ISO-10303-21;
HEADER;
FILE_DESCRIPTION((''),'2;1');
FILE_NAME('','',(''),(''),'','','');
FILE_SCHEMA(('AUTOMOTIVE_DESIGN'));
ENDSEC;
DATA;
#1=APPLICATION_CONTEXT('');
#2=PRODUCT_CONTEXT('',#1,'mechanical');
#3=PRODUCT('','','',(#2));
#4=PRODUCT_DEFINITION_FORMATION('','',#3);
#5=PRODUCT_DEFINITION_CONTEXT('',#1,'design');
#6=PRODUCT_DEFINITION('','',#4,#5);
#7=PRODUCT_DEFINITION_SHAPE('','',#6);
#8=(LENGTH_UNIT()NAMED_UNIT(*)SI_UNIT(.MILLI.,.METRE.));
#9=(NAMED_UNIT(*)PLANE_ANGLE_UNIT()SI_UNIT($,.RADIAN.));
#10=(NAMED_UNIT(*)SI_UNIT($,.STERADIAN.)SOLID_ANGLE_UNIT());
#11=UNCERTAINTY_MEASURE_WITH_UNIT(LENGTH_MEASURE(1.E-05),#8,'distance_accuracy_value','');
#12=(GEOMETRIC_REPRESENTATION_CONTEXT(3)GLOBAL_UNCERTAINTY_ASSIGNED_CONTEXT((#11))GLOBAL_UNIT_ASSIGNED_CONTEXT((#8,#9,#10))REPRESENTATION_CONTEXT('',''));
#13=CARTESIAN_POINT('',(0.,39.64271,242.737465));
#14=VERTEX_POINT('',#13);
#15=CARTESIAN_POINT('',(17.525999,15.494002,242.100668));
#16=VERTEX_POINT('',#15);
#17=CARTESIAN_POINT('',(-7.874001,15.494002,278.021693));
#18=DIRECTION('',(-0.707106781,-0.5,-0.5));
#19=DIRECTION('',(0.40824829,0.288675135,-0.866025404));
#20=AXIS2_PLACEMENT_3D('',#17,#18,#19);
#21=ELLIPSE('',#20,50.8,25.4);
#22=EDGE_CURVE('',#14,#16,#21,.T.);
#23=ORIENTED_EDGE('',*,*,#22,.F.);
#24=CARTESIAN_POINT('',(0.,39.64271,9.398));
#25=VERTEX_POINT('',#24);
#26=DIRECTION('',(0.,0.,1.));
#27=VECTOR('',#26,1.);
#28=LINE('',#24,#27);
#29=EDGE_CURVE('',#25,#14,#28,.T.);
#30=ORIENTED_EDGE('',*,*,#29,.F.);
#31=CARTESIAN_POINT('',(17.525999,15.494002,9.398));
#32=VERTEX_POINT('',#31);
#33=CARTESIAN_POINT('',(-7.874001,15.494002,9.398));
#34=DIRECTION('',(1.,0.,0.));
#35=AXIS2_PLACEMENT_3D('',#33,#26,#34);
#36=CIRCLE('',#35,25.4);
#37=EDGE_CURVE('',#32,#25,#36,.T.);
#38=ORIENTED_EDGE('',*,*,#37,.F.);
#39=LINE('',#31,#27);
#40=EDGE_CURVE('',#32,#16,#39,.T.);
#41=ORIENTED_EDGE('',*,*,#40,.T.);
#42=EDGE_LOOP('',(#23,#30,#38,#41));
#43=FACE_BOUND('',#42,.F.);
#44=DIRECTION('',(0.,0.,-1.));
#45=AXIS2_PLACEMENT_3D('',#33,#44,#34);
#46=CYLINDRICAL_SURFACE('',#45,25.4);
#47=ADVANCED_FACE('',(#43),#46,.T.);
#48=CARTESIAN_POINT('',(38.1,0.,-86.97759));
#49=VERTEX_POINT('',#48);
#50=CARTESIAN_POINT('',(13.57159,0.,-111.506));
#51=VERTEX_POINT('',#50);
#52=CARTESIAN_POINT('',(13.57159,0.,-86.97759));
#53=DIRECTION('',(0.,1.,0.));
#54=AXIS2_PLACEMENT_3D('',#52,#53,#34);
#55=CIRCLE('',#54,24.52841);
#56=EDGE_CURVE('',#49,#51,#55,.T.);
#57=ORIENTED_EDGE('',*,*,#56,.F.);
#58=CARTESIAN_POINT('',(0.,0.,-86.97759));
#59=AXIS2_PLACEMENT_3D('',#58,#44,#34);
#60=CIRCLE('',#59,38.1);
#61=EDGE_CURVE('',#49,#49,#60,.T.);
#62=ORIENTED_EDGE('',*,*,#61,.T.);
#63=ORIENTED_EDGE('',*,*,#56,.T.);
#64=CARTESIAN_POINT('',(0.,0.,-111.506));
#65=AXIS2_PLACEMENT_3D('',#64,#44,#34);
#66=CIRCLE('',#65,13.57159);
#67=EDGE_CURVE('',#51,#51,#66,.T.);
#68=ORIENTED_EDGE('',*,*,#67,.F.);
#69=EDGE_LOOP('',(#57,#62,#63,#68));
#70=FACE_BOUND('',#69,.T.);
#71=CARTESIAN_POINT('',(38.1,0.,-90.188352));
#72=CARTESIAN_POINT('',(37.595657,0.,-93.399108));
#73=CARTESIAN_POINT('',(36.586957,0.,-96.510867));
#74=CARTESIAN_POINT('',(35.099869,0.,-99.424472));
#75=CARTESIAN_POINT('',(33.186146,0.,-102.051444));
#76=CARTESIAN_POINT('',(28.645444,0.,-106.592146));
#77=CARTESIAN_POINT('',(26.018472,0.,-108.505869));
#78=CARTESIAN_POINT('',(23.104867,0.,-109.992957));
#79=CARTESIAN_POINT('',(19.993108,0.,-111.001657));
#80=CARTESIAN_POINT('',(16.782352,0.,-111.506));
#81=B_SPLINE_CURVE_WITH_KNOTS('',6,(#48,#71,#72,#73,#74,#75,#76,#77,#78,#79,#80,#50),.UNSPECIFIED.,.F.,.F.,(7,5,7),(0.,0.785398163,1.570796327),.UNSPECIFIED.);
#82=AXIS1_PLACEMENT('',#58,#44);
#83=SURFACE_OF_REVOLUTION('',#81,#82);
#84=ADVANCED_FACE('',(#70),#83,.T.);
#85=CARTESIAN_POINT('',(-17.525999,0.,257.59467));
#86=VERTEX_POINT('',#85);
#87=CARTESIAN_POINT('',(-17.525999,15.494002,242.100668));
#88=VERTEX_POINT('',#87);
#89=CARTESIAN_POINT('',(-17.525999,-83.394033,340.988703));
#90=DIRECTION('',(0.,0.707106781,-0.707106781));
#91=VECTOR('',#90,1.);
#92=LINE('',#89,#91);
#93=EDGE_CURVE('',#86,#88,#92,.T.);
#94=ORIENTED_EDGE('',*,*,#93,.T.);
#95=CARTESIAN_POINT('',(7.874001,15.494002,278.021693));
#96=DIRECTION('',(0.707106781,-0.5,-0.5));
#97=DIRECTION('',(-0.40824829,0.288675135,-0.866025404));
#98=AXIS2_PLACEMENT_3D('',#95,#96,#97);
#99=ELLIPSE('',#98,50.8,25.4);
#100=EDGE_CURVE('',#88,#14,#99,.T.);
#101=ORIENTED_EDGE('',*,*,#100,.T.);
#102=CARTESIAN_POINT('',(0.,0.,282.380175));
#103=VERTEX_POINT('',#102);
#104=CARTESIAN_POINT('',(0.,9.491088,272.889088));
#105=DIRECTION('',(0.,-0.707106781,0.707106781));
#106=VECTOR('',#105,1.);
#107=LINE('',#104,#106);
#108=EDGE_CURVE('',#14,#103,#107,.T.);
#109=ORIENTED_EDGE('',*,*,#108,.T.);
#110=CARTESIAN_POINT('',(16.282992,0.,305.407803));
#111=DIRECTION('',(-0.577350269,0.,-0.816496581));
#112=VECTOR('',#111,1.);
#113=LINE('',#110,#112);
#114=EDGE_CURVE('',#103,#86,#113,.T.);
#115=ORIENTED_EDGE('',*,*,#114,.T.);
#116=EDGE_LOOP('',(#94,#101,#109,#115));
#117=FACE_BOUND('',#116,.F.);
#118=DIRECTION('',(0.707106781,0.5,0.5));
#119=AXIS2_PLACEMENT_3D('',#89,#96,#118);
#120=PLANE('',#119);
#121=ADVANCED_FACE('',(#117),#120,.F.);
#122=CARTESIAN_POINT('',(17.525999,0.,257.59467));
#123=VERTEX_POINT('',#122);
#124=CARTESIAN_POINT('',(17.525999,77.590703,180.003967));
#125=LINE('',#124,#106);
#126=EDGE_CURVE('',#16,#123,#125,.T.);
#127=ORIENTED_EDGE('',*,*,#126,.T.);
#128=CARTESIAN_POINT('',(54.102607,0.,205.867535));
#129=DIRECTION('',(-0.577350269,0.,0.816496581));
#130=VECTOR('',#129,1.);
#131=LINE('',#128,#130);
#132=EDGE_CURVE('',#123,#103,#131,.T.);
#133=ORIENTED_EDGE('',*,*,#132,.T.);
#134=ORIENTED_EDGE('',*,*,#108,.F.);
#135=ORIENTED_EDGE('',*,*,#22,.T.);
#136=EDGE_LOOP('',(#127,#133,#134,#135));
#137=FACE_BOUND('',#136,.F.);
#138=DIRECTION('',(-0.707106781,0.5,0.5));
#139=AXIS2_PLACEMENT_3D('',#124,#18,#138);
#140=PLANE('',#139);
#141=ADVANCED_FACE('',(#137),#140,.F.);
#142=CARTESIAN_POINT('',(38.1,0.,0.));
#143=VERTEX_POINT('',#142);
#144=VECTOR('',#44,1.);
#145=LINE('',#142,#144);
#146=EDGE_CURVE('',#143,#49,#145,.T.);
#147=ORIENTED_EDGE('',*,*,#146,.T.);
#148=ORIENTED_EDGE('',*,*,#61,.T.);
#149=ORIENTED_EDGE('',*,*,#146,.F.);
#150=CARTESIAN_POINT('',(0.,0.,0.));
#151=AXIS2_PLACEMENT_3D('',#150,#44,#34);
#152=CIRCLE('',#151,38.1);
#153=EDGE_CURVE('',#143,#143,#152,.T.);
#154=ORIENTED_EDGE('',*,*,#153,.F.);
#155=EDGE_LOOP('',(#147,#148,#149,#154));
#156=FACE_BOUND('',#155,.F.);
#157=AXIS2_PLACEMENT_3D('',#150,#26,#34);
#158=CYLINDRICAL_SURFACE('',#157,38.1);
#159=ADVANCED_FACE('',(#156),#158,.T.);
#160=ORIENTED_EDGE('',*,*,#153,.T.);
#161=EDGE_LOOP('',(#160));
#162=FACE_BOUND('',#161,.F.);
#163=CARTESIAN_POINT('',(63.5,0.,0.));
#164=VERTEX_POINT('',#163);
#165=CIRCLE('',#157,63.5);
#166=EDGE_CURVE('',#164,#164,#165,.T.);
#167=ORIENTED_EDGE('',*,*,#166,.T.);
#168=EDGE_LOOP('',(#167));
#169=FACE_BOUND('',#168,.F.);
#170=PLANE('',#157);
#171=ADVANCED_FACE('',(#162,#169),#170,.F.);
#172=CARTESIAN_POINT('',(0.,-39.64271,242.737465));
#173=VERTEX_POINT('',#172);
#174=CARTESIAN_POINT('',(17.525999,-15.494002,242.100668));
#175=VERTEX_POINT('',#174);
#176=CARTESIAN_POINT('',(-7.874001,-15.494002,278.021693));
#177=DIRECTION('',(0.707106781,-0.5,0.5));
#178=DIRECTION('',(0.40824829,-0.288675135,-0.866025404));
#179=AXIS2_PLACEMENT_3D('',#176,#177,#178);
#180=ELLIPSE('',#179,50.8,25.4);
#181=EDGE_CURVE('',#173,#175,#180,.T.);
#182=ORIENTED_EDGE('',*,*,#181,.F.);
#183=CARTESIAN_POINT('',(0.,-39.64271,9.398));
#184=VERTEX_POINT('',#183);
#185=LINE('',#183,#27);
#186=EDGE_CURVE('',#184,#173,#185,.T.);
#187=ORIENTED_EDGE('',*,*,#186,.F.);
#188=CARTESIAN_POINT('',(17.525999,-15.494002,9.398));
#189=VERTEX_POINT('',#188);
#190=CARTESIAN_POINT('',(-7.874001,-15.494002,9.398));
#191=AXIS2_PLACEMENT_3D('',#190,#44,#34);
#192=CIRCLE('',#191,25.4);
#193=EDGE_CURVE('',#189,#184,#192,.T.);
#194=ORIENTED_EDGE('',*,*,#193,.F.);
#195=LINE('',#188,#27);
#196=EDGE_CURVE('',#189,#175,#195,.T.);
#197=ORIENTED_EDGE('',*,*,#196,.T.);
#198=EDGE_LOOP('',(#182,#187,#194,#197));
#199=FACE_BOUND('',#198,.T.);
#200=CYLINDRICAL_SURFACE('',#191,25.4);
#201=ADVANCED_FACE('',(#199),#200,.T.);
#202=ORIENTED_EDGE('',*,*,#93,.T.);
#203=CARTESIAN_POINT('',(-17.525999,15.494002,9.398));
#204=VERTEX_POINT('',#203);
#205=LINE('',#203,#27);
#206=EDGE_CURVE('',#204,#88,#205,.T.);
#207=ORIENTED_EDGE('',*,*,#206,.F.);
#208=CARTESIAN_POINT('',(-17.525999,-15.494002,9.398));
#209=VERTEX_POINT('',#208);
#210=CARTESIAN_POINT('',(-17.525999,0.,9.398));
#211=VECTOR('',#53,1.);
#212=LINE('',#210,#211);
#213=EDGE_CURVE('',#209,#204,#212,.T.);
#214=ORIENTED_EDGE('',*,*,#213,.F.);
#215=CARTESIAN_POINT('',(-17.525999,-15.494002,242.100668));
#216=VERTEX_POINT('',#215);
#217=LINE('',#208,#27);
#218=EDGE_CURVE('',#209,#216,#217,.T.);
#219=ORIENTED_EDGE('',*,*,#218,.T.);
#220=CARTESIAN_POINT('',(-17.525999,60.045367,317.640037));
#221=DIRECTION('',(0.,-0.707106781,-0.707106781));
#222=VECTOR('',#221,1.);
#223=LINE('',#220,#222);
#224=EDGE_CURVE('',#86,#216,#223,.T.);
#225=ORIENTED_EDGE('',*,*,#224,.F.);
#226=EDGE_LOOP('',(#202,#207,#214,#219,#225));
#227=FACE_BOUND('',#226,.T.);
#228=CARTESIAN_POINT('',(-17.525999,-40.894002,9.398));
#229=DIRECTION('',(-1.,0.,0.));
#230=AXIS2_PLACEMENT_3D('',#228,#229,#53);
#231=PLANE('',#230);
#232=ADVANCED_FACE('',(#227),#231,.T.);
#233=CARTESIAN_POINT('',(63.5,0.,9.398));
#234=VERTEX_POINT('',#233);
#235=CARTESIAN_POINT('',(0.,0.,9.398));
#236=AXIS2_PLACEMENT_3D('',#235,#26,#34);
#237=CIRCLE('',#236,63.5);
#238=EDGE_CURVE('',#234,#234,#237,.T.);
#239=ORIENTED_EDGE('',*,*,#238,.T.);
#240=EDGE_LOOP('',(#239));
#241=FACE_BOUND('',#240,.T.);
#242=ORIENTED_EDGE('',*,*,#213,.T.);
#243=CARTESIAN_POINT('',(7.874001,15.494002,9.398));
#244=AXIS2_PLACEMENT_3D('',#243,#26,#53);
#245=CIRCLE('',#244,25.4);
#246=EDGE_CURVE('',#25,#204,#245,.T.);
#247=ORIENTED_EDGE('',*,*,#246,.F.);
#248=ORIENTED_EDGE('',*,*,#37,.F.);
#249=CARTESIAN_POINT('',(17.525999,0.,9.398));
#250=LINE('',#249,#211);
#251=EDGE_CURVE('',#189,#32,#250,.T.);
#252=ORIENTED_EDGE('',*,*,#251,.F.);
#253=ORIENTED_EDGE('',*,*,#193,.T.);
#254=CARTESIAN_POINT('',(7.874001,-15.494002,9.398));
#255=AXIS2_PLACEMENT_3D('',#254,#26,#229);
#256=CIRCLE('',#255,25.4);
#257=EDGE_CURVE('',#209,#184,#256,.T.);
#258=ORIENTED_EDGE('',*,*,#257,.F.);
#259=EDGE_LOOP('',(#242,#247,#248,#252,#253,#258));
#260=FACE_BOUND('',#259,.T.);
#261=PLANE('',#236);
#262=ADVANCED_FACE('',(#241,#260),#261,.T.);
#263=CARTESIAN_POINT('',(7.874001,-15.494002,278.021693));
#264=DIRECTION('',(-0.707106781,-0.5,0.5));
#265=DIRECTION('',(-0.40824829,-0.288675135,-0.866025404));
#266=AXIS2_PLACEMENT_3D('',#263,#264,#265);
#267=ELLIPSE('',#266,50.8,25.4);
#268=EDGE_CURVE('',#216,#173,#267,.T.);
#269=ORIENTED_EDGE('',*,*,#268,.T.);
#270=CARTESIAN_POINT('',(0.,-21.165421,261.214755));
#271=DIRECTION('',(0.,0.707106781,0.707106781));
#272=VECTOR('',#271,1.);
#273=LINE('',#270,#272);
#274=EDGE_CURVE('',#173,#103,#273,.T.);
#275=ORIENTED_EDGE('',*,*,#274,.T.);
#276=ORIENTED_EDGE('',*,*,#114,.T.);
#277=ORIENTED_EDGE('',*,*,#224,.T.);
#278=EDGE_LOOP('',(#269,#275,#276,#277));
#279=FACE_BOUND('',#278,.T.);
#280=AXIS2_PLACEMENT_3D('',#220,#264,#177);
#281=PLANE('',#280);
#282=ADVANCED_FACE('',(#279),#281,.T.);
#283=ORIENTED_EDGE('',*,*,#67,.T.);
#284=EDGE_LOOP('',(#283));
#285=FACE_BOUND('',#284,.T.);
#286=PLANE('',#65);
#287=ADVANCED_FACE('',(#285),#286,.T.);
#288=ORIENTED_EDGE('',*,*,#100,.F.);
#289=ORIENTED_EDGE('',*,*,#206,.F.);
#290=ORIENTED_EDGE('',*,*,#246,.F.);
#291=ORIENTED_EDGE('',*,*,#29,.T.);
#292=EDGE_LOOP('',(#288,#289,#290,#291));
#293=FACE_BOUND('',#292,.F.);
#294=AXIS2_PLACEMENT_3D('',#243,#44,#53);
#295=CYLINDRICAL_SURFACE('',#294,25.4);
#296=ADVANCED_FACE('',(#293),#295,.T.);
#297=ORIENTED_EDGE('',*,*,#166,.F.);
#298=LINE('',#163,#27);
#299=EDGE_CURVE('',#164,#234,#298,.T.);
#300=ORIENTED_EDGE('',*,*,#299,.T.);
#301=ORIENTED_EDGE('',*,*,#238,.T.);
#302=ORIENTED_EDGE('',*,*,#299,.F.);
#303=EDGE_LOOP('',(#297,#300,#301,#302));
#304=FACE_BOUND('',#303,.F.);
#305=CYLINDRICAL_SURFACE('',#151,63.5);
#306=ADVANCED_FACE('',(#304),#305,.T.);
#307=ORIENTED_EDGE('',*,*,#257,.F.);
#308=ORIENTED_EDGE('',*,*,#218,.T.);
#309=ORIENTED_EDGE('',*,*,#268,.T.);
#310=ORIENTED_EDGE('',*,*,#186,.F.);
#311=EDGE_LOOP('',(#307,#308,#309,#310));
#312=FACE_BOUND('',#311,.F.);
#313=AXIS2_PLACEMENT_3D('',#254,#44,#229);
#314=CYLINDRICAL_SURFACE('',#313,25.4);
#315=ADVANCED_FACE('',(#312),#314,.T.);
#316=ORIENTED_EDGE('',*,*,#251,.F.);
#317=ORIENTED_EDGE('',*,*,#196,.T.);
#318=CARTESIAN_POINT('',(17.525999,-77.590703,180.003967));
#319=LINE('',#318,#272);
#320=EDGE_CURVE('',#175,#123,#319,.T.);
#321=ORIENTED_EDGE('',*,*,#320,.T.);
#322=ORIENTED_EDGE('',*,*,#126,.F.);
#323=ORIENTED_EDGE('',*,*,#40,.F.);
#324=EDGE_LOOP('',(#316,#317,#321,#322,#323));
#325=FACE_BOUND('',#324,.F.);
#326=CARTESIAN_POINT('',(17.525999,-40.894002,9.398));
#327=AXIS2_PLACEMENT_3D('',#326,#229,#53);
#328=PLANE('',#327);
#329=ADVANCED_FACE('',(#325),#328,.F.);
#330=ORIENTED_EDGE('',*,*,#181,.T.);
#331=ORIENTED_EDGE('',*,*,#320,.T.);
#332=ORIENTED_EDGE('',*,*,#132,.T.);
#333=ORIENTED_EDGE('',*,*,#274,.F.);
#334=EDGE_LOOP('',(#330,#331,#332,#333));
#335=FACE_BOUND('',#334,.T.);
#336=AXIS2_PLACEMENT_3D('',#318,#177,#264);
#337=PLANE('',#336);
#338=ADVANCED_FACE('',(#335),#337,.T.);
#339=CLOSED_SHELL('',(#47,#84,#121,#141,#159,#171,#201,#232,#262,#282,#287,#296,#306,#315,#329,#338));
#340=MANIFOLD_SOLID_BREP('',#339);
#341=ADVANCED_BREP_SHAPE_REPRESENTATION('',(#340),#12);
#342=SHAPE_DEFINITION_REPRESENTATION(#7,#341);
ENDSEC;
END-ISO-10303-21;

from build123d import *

# Parameters (mm, degrees)
F0_R         = 63.5
F1_DEPTH     = 9.398
F2_R         = 38.1
F3_DEPTH     = 111.506
F4_W         = 35.051997751
F4_H         = 81.7880034447
F5_DEPTH     = 304.8
F6_R         = 24.5284097937
F7_T1_DEPTH  = 296.3349893283
F8_T1_DEPTH  = 227.6667963807
F8_T3_DEPTH  = 227.6667963807
F9_T1_DEPTH  = 194.6467963807
F9_T3_DEPTH  = 194.6467963807
F10_T1_DEPTH = 270.8026681705


# Not quite as in the source:
# - a fillet or chamfer that OpenCascade refuses, or shapes differently, is made with other operations: its cross-section is extruded or revolved along the edge and cut away or added


with BuildPart() as f1:
    # F0 (on Top) → F1 (new body)
    with BuildSketch(Plane.XY):
        Circle(F0_R)
    extrude(amount=F1_DEPTH)

    # F2 (on face) → F3 (join)
    with BuildSketch(Plane(origin=(0, 0, 0), x_dir=(1, 0, 0), z_dir=(0, 0, -1))):
        Circle(F2_R)
    extrude(amount=F3_DEPTH)

    # F4 (on face) → F5 (join)
    with BuildSketch(Plane.XY.offset(9.398)):
        Rectangle(F4_W, F4_H)
    extrude(amount=F5_DEPTH)

    # F6
    f6_edges = [f1.edges().sort_by_distance(p)[0] for p in [
        (-38.1, 0, -111.506),
    ]]
    fillet(f6_edges, radius=F6_R)

    # F7: chamfer of 50.8 on 2 edges, made by hand

    # F7_s2 → F7_t1 (cut)
    with BuildSketch(Plane.YZ.offset(-148.1674946642)):
        Polygon((40.8940017223, 263.398), (-9.9059982777, 314.198), (40.8940017223, 314.198), align=None)
        Polygon((-40.8940017223, 263.398), (9.9059982777, 314.198), (-40.8940017223, 314.198), align=None)
    extrude(amount=F7_T1_DEPTH, mode=Mode.SUBTRACT)

    # F8: chamfer of 33.02 on 2 edges, made by hand

    # F8_s2 → F8_t1 (cut)
    with BuildSketch(Plane(origin=(0, -51.2066322141, 51.2066322141), x_dir=(1, 0, 0), z_dir=(0, -0.7071067812, 0.7071067812))):
        Polygon((17.5259988755, 182.1469378787), (-15.4940011245, 215.1669378787), (17.5259988755, 215.1669378787), align=None)
    extrude(amount=F8_T1_DEPTH, mode=Mode.SUBTRACT)

    # F8_s4 → F8_t3 (cut)
    with BuildSketch(Plane(origin=(0, -212.1913677859, 212.1913677859), x_dir=(1, 0, 0), z_dir=(0, 0.7071067812, -0.7071067812))):
        Polygon((-17.5259988755, -182.1469378787), (15.4940011245, -215.1669378787), (-17.5259988755, -215.1669378787), align=None)
    extrude(amount=F8_T3_DEPTH, mode=Mode.SUBTRACT)

    # F9: chamfer of 33.02 on 2 edges, made by hand

    # F9_s2 → F9_t1 (cut)
    with BuildSketch(Plane(origin=(0, 188.8427018711, 188.8427018711), x_dir=(1, 0, 0), z_dir=(0, -0.7071067812, -0.7071067812))):
        Polygon((-17.5259988755, 182.1469378787), (15.4940011245, 215.1669378787), (-17.5259988755, 215.1669378787), align=None)
    extrude(amount=F9_T1_DEPTH, mode=Mode.SUBTRACT)

    # F9_s4 → F9_t3 (cut)
    with BuildSketch(Plane(origin=(0, 51.2066322141, 51.2066322141), x_dir=(1, 0, 0), z_dir=(0, 0.7071067812, 0.7071067812))):
        Polygon((17.5259988755, -182.1469378787), (-15.4940011245, -215.1669378787), (17.5259988755, -215.1669378787), align=None)
    extrude(amount=F9_T3_DEPTH, mode=Mode.SUBTRACT)

    # F10: fillet of radius 25.4 on 4 edges, made by hand

    # F10_s2 → F10_t1 (cut)
    with BuildSketch(Plane.XY.offset(9.398)):
        with BuildLine():
            ThreePointArc((7.8740011245, 40.8940017223), (-10.0865111176, 33.4545139645), (-17.5259988755, 15.4940017223))
            Line((-17.5259988755, 15.4940017223), (-17.5259988755, 40.8940017223))
            Line((-17.5259988755, 40.8940017223), (7.8740011245, 40.8940017223))
        make_face()
        with BuildLine():
            ThreePointArc((17.5259988755, 15.4940017223), (10.0865111176, 33.4545139645), (-7.8740011245, 40.8940017223))
            Line((-7.8740011245, 40.8940017223), (17.5259988755, 40.8940017223))
            Line((17.5259988755, 40.8940017223), (17.5259988755, 15.4940017223))
        make_face()
        with BuildLine():
            ThreePointArc((-17.5259988755, -15.4940017223), (-10.0865111176, -33.4545139645), (7.8740011245, -40.8940017223))
            Line((7.8740011245, -40.8940017223), (-17.5259988755, -40.8940017223))
            Line((-17.5259988755, -40.8940017223), (-17.5259988755, -15.4940017223))
        make_face()
        with BuildLine():
            ThreePointArc((17.5259988755, -15.4940017223), (10.0865111176, -33.4545139645), (-7.8740011245, -40.8940017223))
            Line((-7.8740011245, -40.8940017223), (17.5259988755, -40.8940017223))
            Line((17.5259988755, -40.8940017223), (17.5259988755, -15.4940017223))
        make_face()
    extrude(amount=F10_T1_DEPTH, mode=Mode.SUBTRACT)


solid = f1.part
